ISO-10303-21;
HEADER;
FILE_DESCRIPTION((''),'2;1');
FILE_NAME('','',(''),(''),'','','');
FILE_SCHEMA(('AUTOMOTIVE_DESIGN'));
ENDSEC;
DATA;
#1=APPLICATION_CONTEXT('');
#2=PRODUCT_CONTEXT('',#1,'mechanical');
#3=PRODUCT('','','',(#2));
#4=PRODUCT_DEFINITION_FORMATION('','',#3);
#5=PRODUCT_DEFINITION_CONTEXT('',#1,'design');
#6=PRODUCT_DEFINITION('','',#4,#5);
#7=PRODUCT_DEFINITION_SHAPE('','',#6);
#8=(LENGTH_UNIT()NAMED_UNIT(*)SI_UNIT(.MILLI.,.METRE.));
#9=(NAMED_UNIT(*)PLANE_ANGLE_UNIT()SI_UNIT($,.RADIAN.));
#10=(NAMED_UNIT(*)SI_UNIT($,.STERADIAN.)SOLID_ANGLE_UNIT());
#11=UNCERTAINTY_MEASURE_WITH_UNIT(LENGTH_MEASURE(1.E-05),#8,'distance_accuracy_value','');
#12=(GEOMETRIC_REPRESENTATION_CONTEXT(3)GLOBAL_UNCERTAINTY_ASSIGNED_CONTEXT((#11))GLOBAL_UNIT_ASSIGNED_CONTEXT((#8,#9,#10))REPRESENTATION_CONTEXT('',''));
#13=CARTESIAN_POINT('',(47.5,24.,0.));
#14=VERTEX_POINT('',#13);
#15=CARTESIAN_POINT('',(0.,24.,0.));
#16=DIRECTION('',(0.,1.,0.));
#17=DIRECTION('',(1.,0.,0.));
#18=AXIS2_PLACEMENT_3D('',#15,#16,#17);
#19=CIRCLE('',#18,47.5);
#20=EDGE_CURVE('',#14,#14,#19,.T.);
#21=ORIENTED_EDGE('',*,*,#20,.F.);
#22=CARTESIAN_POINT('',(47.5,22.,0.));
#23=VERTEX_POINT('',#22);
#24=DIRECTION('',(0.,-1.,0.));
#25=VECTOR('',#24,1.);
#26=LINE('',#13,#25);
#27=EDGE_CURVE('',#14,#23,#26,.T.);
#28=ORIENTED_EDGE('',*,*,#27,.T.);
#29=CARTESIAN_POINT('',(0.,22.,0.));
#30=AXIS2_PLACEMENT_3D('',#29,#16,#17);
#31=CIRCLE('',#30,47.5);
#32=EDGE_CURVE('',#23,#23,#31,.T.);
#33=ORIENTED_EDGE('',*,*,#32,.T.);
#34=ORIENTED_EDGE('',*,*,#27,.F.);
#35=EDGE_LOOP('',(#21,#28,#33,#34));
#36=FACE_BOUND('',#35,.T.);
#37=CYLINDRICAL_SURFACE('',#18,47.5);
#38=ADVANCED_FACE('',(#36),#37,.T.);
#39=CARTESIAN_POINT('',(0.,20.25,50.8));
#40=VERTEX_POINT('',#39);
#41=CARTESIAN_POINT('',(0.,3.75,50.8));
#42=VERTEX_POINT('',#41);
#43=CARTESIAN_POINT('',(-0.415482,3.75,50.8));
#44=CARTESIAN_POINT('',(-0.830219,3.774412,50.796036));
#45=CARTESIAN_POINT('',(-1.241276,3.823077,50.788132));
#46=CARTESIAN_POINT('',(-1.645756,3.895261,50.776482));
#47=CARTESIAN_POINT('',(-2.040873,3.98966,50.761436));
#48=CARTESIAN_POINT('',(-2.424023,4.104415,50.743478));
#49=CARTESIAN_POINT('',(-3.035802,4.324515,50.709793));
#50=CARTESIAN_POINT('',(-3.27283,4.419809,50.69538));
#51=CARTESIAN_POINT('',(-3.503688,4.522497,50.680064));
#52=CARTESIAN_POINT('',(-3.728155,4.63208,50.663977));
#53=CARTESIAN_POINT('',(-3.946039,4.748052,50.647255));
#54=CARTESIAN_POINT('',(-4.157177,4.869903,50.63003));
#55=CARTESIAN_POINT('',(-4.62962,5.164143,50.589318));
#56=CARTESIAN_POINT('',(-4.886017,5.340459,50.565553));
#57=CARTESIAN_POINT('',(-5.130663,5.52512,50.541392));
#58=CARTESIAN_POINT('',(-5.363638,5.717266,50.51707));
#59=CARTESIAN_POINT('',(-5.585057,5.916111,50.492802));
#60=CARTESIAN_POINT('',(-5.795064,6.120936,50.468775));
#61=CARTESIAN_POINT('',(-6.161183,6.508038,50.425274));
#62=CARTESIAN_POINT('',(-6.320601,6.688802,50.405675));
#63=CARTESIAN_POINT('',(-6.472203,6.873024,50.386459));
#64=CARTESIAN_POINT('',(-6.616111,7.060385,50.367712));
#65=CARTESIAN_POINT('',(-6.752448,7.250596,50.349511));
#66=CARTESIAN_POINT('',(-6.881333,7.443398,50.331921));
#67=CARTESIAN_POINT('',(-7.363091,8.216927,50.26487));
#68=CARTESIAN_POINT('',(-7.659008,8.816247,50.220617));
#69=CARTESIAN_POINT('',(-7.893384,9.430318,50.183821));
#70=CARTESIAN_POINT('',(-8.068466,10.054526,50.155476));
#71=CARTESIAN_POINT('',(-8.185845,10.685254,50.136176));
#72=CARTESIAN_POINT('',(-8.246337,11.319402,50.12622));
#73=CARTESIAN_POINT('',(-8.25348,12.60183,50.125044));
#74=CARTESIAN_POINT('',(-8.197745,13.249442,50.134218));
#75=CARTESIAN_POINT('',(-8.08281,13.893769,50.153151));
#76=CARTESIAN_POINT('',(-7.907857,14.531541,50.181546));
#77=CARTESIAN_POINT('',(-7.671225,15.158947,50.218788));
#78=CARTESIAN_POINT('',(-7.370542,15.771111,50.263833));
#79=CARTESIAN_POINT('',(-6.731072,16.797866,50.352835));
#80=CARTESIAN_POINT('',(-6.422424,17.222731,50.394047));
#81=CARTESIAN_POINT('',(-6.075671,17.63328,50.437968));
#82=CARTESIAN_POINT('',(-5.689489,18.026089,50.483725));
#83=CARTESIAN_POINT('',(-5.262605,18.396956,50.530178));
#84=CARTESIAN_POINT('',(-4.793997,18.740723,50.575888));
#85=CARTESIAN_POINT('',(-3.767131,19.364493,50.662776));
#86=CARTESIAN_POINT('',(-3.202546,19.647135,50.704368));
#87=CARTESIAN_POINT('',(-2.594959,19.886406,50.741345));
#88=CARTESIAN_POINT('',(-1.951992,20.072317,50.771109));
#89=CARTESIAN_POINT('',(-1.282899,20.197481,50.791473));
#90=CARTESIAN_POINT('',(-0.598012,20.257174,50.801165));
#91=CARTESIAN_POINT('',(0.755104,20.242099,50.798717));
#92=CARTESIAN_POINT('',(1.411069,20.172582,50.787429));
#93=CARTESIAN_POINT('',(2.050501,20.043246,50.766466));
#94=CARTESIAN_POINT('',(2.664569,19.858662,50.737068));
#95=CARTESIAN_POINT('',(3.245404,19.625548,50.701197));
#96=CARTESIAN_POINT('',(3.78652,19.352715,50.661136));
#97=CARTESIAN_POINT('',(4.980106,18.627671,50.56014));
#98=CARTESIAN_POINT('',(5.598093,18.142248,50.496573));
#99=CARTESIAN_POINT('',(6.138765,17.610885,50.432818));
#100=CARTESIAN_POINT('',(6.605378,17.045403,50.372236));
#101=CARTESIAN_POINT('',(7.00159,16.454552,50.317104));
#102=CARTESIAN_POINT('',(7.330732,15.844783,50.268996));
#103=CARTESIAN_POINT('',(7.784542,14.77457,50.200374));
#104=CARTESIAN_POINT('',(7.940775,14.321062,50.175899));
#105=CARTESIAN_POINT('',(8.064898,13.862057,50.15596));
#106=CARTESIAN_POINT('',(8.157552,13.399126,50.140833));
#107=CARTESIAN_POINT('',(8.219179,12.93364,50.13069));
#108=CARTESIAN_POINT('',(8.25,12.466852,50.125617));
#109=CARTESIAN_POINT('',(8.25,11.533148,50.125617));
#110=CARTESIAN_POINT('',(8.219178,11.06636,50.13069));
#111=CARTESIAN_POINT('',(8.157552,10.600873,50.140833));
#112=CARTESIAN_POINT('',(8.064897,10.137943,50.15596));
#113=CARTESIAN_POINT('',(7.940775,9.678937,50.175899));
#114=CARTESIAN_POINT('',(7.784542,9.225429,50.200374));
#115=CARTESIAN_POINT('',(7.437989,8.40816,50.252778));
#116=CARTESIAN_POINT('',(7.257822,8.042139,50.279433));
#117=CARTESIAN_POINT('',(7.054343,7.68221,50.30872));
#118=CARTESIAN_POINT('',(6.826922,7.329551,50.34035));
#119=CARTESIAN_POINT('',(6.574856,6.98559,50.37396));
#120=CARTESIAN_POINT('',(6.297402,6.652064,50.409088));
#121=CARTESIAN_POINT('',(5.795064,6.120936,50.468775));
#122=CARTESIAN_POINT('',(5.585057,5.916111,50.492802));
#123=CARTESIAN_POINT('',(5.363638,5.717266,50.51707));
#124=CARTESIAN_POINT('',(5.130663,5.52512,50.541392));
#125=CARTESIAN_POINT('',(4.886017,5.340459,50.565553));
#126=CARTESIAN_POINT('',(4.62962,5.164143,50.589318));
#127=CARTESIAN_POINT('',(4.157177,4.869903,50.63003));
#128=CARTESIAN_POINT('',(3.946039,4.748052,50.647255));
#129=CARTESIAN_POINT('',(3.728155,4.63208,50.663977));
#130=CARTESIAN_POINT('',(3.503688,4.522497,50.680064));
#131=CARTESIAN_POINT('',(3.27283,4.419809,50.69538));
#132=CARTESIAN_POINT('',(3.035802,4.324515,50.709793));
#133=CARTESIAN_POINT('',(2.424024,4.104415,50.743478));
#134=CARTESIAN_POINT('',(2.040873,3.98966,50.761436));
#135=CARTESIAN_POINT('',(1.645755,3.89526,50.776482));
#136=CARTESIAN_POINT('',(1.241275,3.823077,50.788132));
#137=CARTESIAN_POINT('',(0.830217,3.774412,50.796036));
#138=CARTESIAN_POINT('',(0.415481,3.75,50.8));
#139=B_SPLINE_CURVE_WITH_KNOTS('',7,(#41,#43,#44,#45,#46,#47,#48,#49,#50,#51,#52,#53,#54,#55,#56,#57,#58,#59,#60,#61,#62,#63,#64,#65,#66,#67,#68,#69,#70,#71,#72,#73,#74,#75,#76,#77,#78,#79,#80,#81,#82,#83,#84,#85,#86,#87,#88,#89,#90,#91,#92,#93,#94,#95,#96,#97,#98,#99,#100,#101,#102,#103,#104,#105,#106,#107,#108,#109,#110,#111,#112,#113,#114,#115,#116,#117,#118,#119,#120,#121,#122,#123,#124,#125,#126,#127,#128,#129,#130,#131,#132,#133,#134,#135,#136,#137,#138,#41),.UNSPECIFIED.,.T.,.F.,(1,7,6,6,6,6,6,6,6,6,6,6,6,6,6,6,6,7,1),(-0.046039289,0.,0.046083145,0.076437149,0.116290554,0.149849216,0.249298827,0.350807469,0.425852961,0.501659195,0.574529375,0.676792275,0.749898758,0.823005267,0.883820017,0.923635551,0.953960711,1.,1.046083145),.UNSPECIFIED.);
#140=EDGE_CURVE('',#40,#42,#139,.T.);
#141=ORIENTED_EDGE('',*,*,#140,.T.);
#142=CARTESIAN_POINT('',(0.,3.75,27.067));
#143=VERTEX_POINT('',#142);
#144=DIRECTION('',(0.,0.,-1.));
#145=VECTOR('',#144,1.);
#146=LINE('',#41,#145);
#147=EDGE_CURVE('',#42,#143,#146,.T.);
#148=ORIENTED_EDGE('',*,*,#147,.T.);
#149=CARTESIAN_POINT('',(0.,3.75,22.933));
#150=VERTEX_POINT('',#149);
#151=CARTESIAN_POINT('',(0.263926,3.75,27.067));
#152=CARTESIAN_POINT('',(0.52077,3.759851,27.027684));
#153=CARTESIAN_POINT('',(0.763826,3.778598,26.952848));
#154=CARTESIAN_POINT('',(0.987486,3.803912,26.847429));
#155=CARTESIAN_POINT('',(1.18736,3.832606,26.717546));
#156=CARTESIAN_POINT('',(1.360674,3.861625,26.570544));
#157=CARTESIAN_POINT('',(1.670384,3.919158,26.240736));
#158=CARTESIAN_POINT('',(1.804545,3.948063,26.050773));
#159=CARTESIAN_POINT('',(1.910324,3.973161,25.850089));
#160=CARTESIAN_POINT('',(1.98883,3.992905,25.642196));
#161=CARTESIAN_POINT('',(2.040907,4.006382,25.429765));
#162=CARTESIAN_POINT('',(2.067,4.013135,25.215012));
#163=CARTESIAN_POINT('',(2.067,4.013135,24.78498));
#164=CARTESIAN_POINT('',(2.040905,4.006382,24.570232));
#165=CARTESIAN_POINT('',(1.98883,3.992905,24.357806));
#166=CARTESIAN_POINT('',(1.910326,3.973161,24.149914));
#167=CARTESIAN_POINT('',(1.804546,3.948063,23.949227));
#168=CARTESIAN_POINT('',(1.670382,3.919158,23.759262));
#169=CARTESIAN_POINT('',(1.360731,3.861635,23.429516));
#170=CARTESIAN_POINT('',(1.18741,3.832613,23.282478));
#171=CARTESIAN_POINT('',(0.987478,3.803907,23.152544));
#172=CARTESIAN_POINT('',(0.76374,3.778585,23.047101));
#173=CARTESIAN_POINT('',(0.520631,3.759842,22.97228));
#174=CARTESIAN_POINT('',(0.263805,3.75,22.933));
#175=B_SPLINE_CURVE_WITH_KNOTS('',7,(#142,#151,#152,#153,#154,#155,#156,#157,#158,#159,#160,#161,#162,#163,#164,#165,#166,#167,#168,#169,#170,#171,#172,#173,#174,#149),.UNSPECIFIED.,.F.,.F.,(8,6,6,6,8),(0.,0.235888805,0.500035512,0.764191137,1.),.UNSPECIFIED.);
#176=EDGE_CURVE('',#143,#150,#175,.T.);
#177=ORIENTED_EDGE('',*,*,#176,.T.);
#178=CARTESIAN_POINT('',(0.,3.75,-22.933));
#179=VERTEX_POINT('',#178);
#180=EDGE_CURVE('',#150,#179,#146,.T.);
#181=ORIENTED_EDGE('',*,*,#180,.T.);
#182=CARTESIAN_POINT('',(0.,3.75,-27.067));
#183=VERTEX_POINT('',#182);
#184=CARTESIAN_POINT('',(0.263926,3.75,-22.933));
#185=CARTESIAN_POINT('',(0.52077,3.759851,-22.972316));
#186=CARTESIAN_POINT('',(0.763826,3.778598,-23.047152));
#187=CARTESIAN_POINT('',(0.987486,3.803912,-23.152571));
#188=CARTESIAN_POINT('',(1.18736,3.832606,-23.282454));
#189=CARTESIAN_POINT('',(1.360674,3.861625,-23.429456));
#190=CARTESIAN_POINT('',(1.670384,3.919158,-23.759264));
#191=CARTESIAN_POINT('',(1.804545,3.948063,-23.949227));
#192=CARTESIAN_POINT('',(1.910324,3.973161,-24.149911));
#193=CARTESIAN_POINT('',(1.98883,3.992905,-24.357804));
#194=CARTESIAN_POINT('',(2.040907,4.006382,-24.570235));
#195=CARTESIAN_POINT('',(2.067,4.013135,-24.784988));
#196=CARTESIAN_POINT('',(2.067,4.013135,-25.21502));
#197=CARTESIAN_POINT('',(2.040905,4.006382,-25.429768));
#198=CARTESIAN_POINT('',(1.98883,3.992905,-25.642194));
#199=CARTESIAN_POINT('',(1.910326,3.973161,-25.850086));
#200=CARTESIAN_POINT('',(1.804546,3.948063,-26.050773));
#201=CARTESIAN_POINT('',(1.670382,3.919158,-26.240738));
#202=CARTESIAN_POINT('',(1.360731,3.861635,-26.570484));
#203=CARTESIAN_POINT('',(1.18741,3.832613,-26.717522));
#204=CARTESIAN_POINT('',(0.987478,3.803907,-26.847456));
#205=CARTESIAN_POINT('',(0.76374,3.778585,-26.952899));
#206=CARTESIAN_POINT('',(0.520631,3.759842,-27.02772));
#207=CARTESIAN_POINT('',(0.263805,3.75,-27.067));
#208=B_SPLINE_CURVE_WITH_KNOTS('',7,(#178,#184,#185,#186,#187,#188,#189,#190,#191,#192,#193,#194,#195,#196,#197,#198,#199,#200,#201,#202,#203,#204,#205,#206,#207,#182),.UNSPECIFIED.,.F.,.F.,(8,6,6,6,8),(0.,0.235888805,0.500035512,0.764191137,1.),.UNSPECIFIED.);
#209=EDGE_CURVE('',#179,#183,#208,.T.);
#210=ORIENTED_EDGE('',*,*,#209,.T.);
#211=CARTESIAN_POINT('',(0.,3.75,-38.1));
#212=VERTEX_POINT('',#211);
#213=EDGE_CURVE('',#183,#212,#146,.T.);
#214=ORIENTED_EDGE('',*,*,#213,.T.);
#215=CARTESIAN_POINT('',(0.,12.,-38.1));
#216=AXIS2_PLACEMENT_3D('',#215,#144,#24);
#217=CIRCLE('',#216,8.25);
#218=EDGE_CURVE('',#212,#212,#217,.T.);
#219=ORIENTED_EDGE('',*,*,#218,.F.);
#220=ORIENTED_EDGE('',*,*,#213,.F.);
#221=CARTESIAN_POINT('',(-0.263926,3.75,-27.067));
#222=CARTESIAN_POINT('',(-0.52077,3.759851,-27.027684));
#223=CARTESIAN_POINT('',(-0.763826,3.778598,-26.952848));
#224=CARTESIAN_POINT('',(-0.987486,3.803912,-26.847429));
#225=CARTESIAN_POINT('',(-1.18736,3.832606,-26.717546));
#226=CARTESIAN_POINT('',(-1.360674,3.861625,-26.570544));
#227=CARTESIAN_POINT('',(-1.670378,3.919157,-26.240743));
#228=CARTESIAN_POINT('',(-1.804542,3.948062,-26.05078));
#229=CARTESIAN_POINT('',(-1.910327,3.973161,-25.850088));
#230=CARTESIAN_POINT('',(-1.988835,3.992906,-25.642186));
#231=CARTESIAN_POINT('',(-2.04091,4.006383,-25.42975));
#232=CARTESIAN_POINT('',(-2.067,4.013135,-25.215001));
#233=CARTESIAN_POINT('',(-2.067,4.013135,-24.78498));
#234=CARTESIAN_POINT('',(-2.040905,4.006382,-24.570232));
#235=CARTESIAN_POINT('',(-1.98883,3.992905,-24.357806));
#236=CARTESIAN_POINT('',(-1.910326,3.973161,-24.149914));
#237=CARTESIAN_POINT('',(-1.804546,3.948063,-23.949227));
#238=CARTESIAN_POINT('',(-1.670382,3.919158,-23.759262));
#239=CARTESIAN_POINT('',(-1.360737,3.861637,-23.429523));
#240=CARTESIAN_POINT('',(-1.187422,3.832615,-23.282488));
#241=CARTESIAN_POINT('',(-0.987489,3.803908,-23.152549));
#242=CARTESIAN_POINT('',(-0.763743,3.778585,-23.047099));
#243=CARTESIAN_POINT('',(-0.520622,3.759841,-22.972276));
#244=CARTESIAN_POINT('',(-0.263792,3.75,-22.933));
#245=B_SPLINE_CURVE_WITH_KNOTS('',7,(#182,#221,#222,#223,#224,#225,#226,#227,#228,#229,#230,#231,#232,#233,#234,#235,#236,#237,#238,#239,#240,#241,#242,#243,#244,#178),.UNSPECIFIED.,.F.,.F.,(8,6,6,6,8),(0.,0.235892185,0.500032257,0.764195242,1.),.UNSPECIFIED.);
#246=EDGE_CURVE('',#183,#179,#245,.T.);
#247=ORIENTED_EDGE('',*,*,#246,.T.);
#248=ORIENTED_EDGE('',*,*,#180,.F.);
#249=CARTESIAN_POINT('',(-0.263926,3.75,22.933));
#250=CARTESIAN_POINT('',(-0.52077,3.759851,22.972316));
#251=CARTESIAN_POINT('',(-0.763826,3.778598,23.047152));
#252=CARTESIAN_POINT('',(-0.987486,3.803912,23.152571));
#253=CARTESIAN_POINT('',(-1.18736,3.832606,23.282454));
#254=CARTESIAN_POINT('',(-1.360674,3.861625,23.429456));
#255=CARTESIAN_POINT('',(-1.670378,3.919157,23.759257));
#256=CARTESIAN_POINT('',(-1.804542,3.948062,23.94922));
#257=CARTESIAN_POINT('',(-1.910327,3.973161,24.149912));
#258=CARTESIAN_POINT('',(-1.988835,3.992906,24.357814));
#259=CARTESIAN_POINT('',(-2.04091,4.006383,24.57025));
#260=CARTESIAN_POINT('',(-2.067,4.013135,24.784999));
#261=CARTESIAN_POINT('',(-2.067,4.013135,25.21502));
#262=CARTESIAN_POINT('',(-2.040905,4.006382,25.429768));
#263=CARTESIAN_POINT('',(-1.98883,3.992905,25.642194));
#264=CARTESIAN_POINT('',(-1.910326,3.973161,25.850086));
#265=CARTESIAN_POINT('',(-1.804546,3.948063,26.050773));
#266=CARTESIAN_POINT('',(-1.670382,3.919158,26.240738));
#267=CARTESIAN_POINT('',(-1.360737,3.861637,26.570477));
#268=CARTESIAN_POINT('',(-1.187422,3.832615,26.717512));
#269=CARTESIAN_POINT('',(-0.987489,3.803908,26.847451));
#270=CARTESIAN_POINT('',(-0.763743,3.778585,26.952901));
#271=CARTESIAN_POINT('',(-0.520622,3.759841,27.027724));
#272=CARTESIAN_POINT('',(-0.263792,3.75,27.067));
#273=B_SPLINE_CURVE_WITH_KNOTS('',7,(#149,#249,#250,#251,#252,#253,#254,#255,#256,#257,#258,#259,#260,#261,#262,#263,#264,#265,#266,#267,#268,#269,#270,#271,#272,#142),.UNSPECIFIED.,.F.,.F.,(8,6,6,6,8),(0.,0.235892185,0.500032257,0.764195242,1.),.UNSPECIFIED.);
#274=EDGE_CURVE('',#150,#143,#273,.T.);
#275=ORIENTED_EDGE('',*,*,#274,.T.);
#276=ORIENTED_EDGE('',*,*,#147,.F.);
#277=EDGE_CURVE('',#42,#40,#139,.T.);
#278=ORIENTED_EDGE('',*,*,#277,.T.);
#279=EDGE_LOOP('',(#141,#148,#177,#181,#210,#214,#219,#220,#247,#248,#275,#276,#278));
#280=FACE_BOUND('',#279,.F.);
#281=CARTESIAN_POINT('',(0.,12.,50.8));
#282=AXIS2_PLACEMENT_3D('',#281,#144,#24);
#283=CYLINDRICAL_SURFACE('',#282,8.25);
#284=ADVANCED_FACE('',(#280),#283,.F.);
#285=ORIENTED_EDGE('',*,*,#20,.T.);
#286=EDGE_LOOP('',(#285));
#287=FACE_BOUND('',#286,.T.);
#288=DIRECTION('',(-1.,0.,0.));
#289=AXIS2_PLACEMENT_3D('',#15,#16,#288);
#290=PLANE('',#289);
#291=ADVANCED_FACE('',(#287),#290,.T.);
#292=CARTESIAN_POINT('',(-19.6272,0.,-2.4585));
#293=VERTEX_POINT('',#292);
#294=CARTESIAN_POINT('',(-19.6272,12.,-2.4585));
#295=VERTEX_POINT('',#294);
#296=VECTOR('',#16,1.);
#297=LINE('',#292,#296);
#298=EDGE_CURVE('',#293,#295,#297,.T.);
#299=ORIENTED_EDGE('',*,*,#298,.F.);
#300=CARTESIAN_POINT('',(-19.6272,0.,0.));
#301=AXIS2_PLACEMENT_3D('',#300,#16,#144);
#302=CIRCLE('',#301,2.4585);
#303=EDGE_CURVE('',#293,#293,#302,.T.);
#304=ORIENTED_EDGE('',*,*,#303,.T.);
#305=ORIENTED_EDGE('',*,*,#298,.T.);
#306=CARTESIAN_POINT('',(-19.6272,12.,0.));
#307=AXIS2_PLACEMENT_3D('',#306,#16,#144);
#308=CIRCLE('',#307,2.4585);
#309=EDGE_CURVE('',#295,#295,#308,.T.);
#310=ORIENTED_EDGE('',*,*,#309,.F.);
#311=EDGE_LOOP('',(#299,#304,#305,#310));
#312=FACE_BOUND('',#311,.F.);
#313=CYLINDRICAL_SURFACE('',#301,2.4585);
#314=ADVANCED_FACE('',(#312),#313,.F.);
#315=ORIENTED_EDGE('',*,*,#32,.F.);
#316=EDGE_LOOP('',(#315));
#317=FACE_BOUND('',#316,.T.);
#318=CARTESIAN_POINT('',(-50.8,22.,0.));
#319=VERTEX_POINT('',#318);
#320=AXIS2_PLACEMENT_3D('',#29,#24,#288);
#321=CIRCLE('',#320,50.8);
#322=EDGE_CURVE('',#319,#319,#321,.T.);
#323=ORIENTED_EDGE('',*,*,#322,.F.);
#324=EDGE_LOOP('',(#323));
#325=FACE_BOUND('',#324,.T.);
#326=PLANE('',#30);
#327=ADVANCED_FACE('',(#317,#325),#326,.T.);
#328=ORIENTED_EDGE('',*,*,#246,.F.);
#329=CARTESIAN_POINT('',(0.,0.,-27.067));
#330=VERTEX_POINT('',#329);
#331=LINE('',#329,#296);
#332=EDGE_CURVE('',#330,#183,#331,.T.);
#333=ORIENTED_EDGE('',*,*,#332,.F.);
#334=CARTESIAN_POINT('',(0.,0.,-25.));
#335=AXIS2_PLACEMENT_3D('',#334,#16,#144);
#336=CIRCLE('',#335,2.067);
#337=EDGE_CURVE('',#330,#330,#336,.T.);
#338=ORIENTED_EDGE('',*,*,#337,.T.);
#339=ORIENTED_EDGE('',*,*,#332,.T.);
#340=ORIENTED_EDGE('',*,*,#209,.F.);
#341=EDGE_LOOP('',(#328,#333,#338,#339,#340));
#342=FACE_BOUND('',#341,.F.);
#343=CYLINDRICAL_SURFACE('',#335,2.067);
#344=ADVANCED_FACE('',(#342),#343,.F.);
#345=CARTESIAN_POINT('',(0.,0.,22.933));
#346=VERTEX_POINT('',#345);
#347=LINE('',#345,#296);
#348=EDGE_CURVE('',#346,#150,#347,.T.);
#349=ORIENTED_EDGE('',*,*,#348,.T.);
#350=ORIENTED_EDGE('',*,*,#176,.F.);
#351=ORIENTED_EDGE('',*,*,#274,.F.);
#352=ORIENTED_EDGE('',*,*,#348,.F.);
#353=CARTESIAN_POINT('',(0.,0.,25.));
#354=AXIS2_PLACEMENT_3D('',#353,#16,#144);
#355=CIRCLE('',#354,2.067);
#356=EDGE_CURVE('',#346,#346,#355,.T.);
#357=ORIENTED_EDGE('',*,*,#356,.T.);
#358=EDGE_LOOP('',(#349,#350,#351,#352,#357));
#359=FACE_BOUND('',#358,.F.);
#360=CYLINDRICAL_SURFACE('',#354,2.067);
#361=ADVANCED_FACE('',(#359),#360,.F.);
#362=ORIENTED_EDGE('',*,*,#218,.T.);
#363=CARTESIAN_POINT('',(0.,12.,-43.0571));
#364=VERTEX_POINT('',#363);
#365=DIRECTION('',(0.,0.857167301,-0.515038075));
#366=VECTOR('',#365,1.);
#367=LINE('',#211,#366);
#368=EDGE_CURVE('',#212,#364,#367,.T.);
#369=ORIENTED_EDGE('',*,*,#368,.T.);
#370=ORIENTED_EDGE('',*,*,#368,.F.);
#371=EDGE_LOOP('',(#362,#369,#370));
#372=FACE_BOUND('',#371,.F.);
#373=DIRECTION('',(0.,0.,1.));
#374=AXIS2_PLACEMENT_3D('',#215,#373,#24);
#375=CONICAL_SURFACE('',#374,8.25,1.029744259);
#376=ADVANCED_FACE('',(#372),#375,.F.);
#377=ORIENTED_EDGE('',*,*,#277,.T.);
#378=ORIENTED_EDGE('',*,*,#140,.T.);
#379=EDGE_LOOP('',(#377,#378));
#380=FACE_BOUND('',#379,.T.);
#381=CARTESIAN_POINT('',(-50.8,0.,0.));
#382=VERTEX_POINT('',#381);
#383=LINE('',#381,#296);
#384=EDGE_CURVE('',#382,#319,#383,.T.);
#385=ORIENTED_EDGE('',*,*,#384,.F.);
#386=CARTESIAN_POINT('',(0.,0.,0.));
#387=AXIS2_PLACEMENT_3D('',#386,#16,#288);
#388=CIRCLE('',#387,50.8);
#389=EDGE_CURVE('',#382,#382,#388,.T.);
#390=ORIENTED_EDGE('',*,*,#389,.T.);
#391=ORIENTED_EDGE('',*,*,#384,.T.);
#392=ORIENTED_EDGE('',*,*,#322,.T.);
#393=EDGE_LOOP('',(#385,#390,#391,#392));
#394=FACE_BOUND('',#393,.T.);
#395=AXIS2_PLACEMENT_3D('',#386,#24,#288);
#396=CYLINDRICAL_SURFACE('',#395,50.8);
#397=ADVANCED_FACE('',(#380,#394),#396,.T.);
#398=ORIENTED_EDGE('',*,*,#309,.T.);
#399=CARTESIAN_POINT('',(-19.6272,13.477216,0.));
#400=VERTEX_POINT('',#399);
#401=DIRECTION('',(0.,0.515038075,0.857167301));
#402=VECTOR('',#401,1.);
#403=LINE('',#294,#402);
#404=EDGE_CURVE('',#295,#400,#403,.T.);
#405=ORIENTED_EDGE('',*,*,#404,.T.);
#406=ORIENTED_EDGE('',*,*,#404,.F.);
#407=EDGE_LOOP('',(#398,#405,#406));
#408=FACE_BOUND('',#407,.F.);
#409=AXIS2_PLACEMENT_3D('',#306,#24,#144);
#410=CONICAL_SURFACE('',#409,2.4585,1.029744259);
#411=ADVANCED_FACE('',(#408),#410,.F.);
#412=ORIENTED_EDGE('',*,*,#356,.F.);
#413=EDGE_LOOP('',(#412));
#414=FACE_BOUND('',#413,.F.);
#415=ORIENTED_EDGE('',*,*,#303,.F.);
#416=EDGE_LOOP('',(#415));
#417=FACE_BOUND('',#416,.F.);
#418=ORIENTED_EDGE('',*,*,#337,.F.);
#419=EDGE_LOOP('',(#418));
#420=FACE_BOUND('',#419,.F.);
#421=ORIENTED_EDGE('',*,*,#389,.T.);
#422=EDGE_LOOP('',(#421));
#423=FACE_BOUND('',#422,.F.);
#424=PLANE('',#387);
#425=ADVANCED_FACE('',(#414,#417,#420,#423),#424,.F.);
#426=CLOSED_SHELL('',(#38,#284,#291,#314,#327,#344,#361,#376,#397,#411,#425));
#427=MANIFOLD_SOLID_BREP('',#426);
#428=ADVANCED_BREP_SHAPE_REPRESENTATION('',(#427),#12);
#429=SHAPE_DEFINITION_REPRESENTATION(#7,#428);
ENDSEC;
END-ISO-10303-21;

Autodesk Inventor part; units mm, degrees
ref_plane "YZ Plane" through (0, 0, 0) normal (1, 0, 0) x (0, 1, 0)
ref_plane "XZ Plane" through (0, 0, 0) normal (0, 1, 0) x (-1, 0, 0)
sketch "Sketch1" plane through (0, 0, 0) normal (0, 1, 0) x (-1, 0, 0)
  circle A0 centre (0, 0) radius 50.8
  dimension "d0" = 101.6
extrude "Extrusion1" add sketch "Sketch1" along normal blind 24
ref_plane "Work Plane1" through (0, 0, 50.8) normal (0, 0, 1) x (1, 0, 0)
sketch "Sketch3" plane through (0, 0, 50.8) normal (0, 0, 1) x (1, 0, 0)
  line L0 (50.8, 24) -> (-50.8, 24) projected
  line L1 (0, 24) -> (0, 12) construction
  point P0 (0, 0)
  dimension "d7" = 12
hole "Hole1" at (0, 12, 50.8) direction (0, 0, -1) diameter 16.5 depth 88.9 tip angle 118
sketch "Sketch4" plane through (0, 0, 0) normal (0, -1, 0) x (1, 0, 0)
  line L0 (0, 0) -> (0, -25) construction
  line L1 (0, 0) -> (0, 25) construction
  dimension "d15" = 25
  dimension "d16" = 25
hole "Hole2" at (0, 0, 25) at (0, 0, -25) direction (0, 1, 0) diameter 4.134 end up to surface thread size "M5x0.8" class "6H" standard "ANSI Metric M Profile"
sketch "Sketch5" plane through (0, 0, 0) normal (0, -1, 0) x (1, 0, 0)
  point P0 (0, 0)
  point P1 (-19.6272, 0)
hole "Hole3" at (-19.6272, 0, 0) direction (0, 1, 0) diameter 4.917 depth 12 tip angle 118 thread size "M6x1" class "6H" standard "ANSI Metric M Profile"
ref_plane "Work Plane2" through (0, 0, -38.1) normal (0, 0, 1) x (1, 0, 0)
sketch "Sketch7" plane through (0, 24, 0) normal (0, 1, 0) x (1, 0, 0)
  circle A0 centre (0, 0) radius 50.8
  circle A1 centre (0, 0) radius 47.5
  dimension "d35" = 101.6
  dimension "d36" = 95
extrude "Extrusion4" cut sketch "Sketch7" against normal blind 2
properties part number "Heater disk" material "Aluminum 6061"
